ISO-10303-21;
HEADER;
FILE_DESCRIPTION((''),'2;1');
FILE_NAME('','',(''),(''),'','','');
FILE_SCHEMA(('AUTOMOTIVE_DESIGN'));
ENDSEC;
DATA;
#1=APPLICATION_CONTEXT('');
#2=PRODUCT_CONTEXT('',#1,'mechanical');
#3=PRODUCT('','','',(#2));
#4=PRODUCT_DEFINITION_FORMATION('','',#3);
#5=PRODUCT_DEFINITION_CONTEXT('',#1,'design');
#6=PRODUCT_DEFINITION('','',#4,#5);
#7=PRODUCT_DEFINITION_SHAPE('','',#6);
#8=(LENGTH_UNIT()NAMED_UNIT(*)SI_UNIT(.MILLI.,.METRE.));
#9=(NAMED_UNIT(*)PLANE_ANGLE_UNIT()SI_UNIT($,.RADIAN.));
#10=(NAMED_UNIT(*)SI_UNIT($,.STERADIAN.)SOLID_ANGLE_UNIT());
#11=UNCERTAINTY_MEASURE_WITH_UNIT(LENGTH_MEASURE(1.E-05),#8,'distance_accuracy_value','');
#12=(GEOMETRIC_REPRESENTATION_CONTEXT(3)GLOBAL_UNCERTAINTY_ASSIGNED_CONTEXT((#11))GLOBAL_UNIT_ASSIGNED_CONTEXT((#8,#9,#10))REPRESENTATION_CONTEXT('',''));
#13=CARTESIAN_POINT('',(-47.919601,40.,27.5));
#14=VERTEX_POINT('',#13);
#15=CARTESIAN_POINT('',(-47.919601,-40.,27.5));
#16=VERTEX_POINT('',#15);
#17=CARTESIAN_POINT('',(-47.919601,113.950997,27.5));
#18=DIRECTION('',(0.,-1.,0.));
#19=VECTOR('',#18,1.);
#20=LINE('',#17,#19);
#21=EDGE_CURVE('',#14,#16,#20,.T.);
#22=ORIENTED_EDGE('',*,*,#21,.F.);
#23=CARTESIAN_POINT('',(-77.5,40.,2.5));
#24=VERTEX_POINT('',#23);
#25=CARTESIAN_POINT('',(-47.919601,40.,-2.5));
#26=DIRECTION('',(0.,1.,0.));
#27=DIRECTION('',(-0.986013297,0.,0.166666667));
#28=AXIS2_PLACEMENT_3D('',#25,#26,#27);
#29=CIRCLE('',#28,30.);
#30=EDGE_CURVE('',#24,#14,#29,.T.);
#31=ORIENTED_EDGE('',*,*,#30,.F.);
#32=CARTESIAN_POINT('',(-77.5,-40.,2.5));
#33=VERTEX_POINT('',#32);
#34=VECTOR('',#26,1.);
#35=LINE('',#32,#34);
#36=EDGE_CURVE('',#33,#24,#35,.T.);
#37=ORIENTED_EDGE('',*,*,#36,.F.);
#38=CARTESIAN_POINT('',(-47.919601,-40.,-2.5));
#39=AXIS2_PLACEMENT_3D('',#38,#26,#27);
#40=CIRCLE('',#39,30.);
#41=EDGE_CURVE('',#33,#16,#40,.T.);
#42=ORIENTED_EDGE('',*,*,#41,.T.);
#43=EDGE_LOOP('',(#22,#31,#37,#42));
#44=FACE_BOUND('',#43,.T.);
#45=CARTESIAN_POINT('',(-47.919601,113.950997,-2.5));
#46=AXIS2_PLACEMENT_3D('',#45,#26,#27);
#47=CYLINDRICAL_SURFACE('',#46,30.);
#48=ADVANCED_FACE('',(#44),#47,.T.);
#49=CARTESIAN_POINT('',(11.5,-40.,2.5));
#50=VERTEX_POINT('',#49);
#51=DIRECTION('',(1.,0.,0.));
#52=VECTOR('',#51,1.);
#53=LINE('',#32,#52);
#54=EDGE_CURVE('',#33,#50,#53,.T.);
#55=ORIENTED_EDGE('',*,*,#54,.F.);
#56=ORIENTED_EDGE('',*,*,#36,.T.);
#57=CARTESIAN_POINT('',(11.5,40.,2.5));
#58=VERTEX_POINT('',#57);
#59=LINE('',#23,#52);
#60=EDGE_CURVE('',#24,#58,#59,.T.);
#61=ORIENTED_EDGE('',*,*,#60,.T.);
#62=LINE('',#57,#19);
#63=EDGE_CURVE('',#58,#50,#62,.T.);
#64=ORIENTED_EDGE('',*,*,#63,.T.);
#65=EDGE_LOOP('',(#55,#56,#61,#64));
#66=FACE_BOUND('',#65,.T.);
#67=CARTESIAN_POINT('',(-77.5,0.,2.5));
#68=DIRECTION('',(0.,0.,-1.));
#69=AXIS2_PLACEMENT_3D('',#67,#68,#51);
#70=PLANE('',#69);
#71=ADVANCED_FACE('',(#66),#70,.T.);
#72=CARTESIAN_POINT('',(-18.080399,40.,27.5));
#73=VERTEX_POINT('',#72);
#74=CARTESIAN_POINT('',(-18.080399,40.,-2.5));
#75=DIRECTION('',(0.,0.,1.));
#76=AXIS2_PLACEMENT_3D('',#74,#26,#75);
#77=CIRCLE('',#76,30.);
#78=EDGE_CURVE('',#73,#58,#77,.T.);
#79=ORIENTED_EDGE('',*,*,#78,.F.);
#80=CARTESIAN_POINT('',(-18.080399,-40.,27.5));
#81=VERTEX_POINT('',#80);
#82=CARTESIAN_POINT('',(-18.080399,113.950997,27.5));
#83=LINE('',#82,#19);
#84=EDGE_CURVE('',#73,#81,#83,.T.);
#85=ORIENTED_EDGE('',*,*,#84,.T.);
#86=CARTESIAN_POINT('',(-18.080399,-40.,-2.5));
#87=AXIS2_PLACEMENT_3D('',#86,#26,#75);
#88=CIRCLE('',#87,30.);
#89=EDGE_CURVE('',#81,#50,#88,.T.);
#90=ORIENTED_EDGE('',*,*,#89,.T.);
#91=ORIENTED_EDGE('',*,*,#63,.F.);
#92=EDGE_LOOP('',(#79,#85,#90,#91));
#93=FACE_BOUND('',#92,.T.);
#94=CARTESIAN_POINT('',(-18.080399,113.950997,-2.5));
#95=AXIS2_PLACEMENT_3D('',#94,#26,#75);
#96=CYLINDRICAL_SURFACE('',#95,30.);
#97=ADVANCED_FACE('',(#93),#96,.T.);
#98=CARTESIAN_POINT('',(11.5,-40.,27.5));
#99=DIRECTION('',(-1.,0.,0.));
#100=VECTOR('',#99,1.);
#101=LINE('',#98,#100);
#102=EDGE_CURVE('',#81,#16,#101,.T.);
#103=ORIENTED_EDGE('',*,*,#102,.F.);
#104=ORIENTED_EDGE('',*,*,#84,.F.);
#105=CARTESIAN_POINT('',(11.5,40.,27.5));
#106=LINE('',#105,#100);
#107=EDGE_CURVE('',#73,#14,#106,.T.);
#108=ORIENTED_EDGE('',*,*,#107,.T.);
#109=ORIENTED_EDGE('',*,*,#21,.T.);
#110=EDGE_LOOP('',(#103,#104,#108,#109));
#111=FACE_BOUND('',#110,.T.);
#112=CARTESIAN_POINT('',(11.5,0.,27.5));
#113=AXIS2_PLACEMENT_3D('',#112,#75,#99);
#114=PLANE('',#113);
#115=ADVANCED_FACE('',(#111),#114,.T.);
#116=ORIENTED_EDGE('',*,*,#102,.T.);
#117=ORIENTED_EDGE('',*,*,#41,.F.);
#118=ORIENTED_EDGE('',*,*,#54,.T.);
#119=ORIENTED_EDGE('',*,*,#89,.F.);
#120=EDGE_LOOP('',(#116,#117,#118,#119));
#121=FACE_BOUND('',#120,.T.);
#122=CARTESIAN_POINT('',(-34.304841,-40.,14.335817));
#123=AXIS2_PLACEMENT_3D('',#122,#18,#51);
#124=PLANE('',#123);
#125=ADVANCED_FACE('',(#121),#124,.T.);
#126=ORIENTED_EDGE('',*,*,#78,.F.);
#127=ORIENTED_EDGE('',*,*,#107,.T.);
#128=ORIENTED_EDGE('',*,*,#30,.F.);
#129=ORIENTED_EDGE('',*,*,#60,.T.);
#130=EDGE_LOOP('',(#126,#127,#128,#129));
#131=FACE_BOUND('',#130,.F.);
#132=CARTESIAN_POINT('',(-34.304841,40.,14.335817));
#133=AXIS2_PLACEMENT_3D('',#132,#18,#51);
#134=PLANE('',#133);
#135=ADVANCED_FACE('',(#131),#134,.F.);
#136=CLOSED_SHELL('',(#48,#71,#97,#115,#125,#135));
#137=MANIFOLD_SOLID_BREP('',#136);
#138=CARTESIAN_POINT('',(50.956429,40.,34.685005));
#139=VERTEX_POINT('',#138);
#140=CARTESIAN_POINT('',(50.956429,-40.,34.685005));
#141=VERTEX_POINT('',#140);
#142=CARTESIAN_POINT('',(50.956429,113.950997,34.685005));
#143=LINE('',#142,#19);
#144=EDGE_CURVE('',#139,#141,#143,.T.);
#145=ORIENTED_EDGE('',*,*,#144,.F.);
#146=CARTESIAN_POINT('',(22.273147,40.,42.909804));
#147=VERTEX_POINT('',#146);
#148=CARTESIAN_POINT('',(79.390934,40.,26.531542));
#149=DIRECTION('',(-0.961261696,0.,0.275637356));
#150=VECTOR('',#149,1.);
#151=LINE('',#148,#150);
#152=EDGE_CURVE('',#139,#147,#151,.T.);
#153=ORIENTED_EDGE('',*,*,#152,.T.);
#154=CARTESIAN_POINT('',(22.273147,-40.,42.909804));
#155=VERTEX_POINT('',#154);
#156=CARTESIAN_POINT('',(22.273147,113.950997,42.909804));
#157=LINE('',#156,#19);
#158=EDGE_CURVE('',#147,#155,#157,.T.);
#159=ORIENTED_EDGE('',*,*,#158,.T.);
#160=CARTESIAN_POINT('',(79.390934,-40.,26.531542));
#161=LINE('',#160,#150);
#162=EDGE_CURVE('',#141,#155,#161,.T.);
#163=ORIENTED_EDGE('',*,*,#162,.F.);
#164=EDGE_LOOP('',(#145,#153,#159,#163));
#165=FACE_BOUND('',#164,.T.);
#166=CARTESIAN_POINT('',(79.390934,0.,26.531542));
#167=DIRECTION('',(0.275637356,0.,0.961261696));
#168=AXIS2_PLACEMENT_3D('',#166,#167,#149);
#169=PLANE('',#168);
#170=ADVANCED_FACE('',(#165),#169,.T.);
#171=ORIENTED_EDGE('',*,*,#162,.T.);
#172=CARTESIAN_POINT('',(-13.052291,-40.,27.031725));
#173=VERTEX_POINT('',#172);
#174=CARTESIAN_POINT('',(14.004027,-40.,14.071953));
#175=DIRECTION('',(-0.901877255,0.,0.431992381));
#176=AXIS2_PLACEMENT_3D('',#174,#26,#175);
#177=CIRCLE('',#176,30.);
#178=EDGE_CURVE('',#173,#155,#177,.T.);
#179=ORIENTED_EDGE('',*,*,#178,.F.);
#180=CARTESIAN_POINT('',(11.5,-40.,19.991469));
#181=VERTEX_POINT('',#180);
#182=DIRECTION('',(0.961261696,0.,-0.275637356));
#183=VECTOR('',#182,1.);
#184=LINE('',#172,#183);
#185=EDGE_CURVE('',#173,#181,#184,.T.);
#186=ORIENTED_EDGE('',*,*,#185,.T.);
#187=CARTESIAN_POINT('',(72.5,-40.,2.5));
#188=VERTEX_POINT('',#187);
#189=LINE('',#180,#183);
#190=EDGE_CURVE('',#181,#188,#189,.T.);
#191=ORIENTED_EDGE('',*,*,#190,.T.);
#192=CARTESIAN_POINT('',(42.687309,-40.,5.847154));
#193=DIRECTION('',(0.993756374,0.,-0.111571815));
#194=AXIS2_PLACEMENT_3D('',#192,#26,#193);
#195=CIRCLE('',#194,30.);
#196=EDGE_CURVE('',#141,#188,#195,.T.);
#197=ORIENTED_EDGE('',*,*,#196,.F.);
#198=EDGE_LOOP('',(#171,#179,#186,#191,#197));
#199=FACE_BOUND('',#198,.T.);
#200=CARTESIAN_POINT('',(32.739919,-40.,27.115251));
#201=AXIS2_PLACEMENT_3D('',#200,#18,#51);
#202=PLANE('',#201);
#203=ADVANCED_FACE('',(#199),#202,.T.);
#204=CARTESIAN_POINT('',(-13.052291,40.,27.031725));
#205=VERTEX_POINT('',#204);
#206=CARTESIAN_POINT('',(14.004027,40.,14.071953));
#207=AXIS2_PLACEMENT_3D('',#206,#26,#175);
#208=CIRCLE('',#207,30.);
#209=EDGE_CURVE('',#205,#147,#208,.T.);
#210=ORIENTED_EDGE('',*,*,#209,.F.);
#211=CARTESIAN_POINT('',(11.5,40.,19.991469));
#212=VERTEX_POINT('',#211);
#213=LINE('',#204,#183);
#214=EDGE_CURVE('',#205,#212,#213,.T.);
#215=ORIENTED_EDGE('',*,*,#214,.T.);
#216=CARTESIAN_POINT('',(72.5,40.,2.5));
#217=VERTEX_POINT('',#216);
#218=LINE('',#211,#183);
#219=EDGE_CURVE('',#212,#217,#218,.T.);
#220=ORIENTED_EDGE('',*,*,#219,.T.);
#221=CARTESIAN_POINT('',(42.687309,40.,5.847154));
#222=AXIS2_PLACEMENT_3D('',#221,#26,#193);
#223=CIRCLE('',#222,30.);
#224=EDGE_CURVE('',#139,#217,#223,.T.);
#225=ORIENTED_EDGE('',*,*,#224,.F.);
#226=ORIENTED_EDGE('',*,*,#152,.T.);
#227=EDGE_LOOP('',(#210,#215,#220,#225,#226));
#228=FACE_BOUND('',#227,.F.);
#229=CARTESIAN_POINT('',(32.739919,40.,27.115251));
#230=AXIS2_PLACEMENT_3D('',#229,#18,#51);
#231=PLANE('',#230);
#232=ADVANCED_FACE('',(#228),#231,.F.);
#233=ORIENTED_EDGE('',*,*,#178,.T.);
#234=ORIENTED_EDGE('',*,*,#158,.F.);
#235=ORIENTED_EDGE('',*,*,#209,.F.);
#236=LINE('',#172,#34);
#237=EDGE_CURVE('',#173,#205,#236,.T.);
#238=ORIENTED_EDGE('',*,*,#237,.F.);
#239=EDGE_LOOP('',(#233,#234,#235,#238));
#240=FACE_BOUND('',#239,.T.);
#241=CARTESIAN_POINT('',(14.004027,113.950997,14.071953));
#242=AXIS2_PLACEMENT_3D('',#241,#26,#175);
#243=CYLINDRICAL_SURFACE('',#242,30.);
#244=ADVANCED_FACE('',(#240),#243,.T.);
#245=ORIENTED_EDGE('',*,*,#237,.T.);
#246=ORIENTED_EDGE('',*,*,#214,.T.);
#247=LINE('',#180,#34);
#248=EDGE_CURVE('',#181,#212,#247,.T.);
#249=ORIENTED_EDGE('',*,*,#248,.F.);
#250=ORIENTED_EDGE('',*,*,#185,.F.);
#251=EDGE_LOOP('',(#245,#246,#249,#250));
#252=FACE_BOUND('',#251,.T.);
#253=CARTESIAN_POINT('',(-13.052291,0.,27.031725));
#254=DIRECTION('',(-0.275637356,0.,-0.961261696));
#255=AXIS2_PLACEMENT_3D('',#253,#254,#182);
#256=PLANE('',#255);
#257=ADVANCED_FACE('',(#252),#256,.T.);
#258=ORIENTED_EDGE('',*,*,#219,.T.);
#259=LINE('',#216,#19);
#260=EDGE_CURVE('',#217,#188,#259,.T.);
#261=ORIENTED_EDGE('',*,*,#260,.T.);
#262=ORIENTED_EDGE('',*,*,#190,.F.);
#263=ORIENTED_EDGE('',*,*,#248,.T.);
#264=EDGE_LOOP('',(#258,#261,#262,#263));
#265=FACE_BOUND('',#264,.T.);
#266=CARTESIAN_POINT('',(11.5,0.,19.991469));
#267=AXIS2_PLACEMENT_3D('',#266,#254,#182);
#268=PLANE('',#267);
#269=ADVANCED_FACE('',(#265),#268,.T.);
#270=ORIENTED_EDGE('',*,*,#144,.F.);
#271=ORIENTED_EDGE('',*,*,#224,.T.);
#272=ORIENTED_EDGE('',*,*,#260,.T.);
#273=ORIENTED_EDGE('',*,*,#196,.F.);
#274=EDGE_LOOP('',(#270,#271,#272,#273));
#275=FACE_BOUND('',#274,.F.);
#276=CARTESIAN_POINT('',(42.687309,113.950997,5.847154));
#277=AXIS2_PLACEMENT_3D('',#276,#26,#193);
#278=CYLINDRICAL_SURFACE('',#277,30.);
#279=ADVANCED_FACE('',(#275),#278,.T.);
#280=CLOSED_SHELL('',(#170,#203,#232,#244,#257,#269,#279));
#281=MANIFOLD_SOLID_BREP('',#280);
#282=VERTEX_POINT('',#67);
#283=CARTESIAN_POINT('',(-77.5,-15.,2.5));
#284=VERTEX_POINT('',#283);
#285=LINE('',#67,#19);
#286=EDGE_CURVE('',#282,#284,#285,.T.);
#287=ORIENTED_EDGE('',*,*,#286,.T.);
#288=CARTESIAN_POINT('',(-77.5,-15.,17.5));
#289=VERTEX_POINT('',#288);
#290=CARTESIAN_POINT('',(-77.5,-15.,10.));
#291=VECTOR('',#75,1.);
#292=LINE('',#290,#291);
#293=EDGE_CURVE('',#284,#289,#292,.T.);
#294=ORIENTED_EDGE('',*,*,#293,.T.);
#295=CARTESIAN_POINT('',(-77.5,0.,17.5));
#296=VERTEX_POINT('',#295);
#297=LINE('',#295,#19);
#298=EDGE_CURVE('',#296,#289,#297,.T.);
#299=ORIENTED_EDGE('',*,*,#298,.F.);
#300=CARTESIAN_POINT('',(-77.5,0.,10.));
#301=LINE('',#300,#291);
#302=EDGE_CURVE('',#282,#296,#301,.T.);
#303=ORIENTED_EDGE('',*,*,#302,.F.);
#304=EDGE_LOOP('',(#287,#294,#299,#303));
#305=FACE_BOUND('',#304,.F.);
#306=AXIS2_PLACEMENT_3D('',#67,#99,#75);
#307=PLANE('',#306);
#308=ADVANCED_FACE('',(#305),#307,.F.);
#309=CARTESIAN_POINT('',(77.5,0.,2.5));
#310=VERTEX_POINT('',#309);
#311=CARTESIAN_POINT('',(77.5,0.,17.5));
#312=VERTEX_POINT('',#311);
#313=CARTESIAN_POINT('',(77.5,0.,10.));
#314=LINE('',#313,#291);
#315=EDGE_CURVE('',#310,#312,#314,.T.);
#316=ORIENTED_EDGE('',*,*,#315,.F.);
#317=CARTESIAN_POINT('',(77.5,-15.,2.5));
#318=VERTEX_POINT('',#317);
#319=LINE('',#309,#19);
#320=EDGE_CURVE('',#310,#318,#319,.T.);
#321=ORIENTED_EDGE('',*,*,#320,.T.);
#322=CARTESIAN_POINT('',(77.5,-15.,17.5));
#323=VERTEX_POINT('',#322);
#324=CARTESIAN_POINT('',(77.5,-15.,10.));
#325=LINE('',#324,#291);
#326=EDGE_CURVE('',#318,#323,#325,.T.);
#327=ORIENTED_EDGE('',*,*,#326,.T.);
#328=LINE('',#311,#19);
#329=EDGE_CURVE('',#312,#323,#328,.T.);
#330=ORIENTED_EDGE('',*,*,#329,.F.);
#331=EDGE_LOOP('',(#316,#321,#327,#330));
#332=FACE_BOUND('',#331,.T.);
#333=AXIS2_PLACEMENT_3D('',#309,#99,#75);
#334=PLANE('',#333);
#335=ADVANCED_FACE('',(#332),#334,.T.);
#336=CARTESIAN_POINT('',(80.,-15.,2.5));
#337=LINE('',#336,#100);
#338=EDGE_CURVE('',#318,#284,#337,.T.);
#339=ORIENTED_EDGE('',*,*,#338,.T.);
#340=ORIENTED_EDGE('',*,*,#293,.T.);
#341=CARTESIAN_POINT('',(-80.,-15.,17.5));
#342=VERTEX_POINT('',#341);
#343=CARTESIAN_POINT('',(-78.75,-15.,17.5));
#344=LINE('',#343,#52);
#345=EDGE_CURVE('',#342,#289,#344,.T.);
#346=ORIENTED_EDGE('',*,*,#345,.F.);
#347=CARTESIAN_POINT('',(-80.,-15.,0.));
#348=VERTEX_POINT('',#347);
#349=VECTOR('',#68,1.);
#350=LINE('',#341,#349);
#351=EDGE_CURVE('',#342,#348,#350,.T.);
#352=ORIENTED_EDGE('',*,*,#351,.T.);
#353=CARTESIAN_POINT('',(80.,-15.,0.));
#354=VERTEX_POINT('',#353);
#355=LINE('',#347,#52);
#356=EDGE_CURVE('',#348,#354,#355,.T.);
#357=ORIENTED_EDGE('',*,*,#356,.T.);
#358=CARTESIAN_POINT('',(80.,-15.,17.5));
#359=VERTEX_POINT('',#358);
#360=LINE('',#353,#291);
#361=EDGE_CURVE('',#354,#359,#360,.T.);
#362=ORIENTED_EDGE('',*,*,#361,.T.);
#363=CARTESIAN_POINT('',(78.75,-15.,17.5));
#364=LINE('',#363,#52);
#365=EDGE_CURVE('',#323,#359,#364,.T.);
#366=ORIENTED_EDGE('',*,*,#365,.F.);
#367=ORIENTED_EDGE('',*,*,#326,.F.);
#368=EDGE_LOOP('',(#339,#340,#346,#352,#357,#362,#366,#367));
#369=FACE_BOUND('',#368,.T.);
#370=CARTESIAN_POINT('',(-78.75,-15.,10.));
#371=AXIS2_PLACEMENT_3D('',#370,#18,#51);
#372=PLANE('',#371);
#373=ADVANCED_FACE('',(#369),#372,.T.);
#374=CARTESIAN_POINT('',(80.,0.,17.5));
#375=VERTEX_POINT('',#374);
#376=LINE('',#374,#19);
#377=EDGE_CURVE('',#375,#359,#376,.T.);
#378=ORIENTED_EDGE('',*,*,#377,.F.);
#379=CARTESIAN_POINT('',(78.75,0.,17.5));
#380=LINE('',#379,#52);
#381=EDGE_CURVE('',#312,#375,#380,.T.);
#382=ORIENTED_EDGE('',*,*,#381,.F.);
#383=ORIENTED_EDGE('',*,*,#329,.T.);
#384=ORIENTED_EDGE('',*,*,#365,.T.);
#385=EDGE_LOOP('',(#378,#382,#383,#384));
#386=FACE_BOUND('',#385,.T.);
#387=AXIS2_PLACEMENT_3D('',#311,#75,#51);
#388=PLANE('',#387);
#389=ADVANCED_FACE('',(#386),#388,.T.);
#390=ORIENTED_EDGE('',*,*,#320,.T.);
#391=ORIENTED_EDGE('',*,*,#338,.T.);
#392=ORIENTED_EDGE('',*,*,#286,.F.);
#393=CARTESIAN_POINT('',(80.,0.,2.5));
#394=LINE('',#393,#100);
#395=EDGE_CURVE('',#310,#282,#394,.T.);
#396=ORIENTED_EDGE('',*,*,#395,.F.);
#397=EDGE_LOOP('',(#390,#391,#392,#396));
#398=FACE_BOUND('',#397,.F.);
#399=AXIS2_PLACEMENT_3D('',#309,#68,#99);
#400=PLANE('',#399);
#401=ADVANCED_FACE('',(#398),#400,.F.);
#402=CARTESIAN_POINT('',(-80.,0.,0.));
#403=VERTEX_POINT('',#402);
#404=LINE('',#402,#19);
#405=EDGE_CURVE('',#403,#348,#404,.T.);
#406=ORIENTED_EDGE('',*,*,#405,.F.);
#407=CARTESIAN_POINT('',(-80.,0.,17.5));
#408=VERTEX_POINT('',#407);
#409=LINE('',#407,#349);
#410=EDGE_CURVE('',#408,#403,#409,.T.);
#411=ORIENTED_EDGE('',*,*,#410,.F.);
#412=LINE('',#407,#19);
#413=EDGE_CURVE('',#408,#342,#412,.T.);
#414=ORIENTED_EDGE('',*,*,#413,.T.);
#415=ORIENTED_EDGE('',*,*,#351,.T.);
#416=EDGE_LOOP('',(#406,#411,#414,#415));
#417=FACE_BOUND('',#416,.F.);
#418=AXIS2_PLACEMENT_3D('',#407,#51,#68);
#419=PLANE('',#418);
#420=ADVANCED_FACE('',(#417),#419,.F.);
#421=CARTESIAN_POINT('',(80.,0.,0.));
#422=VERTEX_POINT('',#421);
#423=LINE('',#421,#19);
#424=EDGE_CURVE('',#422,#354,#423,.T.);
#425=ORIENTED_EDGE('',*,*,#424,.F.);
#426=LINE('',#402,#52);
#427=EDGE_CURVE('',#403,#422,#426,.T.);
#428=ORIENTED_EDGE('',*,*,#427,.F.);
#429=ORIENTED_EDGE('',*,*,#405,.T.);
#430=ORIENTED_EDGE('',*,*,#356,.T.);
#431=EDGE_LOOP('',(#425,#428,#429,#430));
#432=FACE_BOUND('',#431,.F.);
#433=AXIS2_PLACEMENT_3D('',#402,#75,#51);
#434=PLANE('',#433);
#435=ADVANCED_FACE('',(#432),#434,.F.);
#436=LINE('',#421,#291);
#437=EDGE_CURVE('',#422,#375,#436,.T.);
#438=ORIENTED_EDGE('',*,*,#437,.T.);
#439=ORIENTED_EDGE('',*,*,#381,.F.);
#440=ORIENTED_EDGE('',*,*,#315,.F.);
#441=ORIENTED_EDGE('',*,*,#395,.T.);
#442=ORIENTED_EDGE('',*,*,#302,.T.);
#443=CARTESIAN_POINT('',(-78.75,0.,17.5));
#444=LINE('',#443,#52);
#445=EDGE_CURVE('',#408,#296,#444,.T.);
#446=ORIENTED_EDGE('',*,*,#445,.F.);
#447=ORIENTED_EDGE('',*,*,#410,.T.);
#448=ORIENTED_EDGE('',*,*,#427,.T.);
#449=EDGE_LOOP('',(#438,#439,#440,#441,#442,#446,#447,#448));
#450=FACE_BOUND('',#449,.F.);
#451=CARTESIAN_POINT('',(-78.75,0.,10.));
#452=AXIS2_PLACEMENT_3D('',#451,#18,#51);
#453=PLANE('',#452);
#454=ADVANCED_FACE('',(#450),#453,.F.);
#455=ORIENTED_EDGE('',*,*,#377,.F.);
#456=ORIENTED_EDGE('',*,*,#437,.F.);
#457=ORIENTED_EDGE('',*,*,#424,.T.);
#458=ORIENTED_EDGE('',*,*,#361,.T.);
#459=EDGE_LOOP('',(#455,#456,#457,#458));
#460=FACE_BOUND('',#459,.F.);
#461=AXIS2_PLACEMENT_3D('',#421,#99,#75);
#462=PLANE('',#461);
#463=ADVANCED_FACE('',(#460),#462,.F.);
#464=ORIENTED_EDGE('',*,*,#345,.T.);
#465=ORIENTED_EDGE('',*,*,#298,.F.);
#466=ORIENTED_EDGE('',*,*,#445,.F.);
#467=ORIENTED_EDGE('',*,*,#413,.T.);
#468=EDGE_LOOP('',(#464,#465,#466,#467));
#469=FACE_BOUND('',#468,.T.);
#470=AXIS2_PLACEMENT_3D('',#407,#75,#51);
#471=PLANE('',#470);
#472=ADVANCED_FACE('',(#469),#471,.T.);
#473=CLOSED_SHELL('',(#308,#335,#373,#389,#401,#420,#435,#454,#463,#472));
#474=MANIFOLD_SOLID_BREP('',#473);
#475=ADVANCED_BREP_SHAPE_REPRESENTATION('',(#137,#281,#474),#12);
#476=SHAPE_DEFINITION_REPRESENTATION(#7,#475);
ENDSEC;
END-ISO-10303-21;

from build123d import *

# Parameters (mm, degrees)
F0_W        = 2.5
F0_H        = 15
F0_H_2      = 2.5
F1_DEPTH    = 15
F2_DEPTH    = 40
F3_T1_DEPTH = 227.9019945775
F4_DEPTH    = 40
F5_T1_DEPTH = 227.9019945775


# Not quite as in the source:
# - a fillet or chamfer that OpenCascade refuses, or shapes differently, is made with other operations: its cross-section is extruded or revolved along the edge and cut away or added


with BuildPart() as f1:
    # F0 (on Front) → F1 (new body)
    with BuildSketch(Plane.XZ):
        with Locations((-78.75, 10)):
            Rectangle(F0_W, F0_H)
        Polygon((-80, 2.5), (-80, 0), (77.5, 0), (77.5, 2.5), (72.5, 2.5), (11.5, 2.5), (-77.5, 2.5), align=None)
        with Locations((78.75, 1.25)):
            Rectangle(F0_W, F0_H_2)
        with Locations((78.75, 10)):
            Rectangle(F0_W, F0_H)
    extrude(amount=F1_DEPTH)


with BuildPart() as f2:
    # F0 (on Front) → F2 (new body, symmetric)
    with BuildSketch(Plane.XZ):
        Polygon((-77.5, 17.5), (-77.5, 2.5), (11.5, 2.5), (11.5, 19.9914685313), (-13.0522909385, 27.0317246677), (-12.9180151477, 27.5), (-77.5, 27.5), align=None)
        Polygon((-13.0522909385, 27.0317246677), (11.5, 19.9914685313), (11.5, 27.5), (-12.9180151477, 27.5), align=None)
    extrude(amount=F2_DEPTH, both=True)

    # F3: fillet of radius 30 on 2 edges, made by hand

    # F3_s2 → F3_t1 (cut)
    with BuildSketch(Plane.XZ.offset(-113.9509972888)):
        with BuildLine():
            ThreePointArc((-77.5, 2.5), (-67.2845178155, 20.4128784748), (-47.9196010845, 27.5))
            Line((-47.9196010845, 27.5), (-77.5, 27.5))
            Line((-77.5, 27.5), (-77.5, 2.5))
        make_face()
        with BuildLine():
            ThreePointArc((-18.0803989155, 27.5), (1.2845178155, 20.4128784748), (11.5, 2.5))
            Line((11.5, 2.5), (11.5, 27.5))
            Line((11.5, 27.5), (-18.0803989155, 27.5))
        make_face()
    extrude(amount=F3_T1_DEPTH, mode=Mode.SUBTRACT)


with BuildPart() as f4:
    # F0 (on Front) → F4 (new body, symmetric)
    with BuildSketch(Plane.XZ):
        Polygon((11.5, 19.9914685313), (72.5, 2.5), (79.3909338954, 26.5315423985), (-6.1613570431, 51.0632670662), (-12.9180151477, 27.5), (11.5, 27.5), align=None)
        Polygon((-13.0522909385, 27.0317246677), (11.5, 19.9914685313), (11.5, 27.5), (-12.9180151477, 27.5), align=None)
    extrude(amount=F4_DEPTH, both=True)

    # F5: fillet of radius 30 on 2 edges, made by hand

    # F5_s2 → F5_t1 (cut)
    with BuildSketch(Plane.XZ.offset(-113.9509972888)):
        with BuildLine():
            ThreePointArc((-13.0522909385, 27.0317246677), (1.7049192488, 41.4349201118), (22.273147385, 42.9098041251))
            Line((22.273147385, 42.9098041251), (-6.1613570431, 51.0632670662))
            Line((-6.1613570431, 51.0632670662), (-13.0522909385, 27.0317246677))
        make_face()
        with BuildLine():
            ThreePointArc((72.5, 2.5), (67.6177067284, 22.5347324395), (50.9564294674, 34.6850053395))
            Line((50.9564294674, 34.6850053395), (79.3909338954, 26.5315423985))
            Line((79.3909338954, 26.5315423985), (72.5, 2.5))
        make_face()
    extrude(amount=F5_T1_DEPTH, mode=Mode.SUBTRACT)


solid = Compound([f1.part, f2.part, f4.part])
